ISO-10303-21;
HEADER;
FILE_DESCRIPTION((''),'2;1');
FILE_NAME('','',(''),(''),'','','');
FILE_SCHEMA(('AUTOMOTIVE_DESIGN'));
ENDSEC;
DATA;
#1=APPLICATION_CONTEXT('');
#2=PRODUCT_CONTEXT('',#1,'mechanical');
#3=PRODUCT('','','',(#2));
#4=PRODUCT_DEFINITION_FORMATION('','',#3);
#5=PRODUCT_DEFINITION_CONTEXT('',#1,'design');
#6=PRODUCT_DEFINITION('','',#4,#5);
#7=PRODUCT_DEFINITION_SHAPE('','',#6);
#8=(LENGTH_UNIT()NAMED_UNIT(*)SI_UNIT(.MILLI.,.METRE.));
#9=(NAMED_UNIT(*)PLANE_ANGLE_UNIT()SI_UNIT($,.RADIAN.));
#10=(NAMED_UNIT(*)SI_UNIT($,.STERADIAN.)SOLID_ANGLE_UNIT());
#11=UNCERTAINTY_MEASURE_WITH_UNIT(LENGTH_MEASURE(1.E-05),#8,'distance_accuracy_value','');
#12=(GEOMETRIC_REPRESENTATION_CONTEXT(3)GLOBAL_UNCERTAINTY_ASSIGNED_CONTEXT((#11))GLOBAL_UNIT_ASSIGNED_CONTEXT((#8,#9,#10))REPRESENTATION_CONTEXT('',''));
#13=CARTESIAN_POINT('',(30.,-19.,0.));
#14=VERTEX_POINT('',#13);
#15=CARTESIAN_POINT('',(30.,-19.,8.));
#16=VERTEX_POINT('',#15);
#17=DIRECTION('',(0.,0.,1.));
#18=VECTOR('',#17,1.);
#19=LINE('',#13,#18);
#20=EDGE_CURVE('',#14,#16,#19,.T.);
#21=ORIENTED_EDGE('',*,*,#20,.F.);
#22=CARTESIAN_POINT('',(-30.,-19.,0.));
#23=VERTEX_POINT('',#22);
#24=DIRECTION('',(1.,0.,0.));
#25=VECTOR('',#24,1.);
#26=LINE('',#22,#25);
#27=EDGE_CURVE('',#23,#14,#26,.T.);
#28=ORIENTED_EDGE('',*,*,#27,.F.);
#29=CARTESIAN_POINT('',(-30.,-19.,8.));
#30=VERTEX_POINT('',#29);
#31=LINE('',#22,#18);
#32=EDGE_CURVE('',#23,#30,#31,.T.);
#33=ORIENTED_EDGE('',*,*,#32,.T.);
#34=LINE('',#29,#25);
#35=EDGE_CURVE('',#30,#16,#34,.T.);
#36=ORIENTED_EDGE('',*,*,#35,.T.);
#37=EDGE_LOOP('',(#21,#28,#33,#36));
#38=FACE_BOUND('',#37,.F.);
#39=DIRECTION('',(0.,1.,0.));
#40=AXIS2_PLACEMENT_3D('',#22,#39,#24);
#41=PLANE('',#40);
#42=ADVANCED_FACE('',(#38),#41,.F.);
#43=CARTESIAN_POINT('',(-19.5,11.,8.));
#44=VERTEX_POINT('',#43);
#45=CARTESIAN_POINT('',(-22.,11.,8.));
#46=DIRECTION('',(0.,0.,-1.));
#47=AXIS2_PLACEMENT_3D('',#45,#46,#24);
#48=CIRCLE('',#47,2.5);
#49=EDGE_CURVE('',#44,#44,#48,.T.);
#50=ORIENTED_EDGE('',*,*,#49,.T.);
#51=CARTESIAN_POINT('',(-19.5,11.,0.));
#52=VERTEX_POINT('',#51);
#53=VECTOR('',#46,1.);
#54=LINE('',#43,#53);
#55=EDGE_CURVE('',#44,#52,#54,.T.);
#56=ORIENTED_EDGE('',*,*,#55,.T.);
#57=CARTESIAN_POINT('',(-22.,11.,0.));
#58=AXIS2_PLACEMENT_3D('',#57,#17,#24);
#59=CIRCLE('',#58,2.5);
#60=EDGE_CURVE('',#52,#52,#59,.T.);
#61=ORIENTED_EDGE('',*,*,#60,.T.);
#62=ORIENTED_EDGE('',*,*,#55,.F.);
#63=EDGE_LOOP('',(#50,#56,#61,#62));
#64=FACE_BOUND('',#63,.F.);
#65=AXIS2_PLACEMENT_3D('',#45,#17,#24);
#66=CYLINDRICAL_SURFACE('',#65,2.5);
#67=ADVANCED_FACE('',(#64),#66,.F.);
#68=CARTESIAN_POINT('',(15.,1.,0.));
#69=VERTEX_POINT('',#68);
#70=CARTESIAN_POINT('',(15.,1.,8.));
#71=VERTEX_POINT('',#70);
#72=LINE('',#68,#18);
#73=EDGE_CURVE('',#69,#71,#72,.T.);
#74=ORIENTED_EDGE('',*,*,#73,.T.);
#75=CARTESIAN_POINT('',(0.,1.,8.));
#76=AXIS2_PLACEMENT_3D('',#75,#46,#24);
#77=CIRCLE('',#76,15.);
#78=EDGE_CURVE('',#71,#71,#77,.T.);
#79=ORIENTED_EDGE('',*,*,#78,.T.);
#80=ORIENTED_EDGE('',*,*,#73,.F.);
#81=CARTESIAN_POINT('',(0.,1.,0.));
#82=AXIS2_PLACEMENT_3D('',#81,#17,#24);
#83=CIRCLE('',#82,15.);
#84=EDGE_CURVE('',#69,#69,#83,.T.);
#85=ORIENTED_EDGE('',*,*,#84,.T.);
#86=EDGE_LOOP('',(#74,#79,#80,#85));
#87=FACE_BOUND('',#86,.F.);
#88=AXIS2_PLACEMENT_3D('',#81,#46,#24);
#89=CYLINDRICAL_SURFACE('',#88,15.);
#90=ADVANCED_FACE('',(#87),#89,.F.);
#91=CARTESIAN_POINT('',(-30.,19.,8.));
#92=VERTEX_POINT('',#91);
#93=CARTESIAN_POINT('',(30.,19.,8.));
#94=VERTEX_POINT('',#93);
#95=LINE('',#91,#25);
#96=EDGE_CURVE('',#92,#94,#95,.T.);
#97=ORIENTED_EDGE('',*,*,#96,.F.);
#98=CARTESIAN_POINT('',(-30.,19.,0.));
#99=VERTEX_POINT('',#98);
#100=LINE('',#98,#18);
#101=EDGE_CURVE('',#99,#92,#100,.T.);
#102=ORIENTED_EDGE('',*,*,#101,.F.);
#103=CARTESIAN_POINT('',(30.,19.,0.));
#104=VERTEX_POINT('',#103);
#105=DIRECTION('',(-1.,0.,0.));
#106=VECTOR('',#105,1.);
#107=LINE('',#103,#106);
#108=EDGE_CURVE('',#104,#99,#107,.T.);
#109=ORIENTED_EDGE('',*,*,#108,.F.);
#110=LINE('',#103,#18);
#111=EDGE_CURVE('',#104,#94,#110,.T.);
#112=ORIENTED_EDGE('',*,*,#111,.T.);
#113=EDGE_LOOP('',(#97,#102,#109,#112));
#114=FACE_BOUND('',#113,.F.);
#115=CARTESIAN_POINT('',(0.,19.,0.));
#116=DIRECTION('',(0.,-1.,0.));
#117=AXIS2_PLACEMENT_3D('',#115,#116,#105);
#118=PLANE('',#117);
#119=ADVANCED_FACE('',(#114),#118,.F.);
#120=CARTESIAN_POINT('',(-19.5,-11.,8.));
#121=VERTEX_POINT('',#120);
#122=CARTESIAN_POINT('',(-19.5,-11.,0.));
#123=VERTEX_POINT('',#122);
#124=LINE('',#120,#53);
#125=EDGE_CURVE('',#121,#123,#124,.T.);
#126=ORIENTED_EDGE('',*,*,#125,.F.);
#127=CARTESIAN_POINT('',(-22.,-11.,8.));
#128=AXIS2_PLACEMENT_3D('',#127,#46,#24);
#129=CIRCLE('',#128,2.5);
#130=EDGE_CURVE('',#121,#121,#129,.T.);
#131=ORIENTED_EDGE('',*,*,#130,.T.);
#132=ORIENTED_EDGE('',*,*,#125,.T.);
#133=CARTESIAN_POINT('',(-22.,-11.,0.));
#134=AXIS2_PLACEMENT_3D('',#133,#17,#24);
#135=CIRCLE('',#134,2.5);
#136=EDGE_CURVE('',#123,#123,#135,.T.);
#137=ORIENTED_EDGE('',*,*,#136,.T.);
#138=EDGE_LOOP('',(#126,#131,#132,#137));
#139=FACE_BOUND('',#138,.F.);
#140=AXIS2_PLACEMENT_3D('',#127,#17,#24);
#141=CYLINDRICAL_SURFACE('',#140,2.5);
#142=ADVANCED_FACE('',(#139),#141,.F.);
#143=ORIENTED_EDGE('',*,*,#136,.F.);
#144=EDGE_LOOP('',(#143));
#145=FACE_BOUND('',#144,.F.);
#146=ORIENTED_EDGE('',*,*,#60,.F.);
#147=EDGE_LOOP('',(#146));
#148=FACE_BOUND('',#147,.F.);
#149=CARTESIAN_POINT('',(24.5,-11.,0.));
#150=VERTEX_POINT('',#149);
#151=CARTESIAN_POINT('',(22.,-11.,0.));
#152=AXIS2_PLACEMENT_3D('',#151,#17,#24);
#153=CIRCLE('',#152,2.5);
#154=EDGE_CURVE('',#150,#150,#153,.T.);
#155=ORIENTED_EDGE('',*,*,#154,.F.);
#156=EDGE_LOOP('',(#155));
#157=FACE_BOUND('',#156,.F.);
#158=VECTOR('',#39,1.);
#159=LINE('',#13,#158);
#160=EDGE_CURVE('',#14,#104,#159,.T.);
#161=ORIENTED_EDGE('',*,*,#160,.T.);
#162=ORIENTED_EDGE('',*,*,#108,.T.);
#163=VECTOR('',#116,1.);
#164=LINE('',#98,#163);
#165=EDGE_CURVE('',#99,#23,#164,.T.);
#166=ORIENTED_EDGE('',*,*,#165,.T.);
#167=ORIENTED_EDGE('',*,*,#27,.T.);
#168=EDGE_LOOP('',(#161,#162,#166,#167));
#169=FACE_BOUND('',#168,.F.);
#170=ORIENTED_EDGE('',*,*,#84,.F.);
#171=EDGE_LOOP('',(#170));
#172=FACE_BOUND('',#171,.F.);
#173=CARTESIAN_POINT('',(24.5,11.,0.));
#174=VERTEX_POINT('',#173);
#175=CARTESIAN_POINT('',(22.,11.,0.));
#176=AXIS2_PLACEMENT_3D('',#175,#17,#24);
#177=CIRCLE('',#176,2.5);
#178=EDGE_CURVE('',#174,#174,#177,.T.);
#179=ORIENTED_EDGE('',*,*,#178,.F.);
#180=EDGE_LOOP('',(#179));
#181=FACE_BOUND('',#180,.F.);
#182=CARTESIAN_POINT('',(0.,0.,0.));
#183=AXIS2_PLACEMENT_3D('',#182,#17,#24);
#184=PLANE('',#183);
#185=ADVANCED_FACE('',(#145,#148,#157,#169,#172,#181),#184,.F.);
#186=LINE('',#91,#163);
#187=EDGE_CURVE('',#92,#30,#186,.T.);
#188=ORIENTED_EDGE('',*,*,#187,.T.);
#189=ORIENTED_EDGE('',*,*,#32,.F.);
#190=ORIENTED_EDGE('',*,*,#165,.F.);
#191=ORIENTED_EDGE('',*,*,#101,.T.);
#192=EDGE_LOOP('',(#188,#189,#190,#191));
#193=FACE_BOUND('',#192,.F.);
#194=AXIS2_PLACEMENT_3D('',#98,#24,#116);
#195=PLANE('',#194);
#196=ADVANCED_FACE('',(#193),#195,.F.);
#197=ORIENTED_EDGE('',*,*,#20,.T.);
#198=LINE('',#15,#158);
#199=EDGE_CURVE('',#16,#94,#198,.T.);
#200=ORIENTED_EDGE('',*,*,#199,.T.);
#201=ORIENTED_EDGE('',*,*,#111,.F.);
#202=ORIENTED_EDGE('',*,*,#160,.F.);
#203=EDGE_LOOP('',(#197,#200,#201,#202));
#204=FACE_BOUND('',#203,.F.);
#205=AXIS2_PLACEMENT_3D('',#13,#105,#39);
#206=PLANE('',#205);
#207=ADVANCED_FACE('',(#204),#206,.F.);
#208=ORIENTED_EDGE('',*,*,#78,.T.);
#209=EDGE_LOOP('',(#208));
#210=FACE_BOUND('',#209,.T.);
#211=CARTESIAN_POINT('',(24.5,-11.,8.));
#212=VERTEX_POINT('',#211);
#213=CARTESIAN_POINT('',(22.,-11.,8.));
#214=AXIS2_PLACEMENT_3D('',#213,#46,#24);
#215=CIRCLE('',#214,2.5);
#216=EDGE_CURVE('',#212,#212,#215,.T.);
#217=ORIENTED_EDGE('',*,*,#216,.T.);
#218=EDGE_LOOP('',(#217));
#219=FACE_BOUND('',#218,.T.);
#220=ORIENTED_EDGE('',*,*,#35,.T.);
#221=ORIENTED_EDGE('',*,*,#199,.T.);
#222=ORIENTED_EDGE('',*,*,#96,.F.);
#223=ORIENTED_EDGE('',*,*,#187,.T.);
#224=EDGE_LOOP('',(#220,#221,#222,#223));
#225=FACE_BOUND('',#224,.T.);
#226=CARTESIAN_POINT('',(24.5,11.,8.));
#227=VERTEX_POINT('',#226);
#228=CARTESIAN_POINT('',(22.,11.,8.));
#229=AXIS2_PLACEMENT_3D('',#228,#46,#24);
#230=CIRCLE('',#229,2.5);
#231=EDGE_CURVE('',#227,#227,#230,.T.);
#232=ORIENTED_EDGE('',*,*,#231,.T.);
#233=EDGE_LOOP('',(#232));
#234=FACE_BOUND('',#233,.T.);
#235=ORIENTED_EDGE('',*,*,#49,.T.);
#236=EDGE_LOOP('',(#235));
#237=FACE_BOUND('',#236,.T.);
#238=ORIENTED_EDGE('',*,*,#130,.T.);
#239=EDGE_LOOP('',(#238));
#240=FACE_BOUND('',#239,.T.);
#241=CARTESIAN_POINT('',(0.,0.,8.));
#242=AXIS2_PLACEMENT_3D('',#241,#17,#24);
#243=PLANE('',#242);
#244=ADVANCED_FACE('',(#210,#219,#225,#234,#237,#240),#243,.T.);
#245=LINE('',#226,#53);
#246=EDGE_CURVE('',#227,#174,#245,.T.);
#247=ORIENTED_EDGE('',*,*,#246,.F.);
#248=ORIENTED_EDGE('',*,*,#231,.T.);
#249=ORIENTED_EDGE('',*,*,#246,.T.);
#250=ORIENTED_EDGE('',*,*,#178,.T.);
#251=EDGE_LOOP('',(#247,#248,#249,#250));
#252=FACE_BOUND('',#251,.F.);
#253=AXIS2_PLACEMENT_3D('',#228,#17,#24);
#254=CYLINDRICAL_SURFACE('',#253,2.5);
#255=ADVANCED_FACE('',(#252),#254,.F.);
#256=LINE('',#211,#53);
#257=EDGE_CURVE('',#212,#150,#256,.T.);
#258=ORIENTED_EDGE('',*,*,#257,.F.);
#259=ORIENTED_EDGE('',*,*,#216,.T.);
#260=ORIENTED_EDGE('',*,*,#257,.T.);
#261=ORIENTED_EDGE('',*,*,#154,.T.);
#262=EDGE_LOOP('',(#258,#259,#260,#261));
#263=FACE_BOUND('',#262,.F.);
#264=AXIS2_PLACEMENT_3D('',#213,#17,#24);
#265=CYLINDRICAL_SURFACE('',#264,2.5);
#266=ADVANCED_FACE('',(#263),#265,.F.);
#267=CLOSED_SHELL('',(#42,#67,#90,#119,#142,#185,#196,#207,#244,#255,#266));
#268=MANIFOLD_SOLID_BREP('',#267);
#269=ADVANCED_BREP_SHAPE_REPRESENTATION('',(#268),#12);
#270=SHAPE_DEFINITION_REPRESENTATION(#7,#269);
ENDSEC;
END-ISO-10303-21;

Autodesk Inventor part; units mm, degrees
ref_plane "YZ Plane" through (0, 0, 0) normal (1, 0, 0) x (0, 1, 0)
ref_plane "XZ Plane" through (0, 0, 0) normal (0, 1, 0) x (-1, 0, 0)
ref_plane "XY Plane" through (0, 0, 0) normal (0, 0, 1) x (1, 0, 0)
sketch "Szkic1" plane through (0, 0, 0) normal (0, 0, 1) x (1, 0, 0)
  line L0 (-30, -19) -> (30, -19)
  line L1 (30, -19) -> (30, 19)
  line L2 (30, 19) -> (-30, 19)
  line L3 (-30, 19) -> (-30, -19)
  line L4 (-30, -19) -> (30, 19) construction
  line L5 (30, -19) -> (-30, 19) construction
  line L6 (0, 19) -> (0, 1)
  circle A0 centre (0, 1) radius 15
  point P0 (0, 0)
  dimension "d0" = 60
  dimension "d1" = 38
  dimension "d2" = 18
  dimension "d3" = 30
extrude "Wyciągnięcie proste1" add sketch "Szkic1" along normal blind 8
sketch "Szkic2" plane through (0, 0, 8) normal (0, 0, 1) x (1, 0, 0)
  circle A0 centre (0, 1) radius 15 projected
  line L0 (-30, -19) -> (30, -19) projected
  line L1 (30, -19) -> (30, 19) projected
  line L2 (30, 19) -> (-30, 19) projected
  line L3 (-30, 19) -> (-30, -19) projected
  line L4 (-30, 19) -> (-30, -19) projected
  line L5 (-30, 19) -> (-22, 19)
  line L6 (30, 19) -> (-30, 19) projected
  line L7 (-22, 19) -> (-22, -19)
  line L8 (30, 19) -> (22, 19)
  line L9 (22, 19) -> (22, -19)
  line L10 (-22, 19) -> (-22, 11)
  line L11 (-22, -19) -> (-22, -11)
  line L12 (22, 19) -> (22, 11)
  line L13 (22, -19) -> (22, -11)
  circle A1 centre (-22, 11) radius 2.5
  circle A2 centre (-22, -11) radius 2.5
  circle A3 centre (22, 11) radius 2.5
  circle A4 centre (22, -11) radius 2.5
  point P0 (0, 0)
  dimension "d6" = 8
  dimension "d7" = 8
  dimension "d8" = 8
  dimension "d9" = 8
  dimension "d10" = 8
  dimension "d11" = 8
  dimension "d12" = 5
  dimension "d13" = 5
  dimension "d14" = 5
  dimension "d15" = 5
extrude "Wyciągnięcie proste2" cut sketch "Szkic2" against normal up to next contours A2 L7 | L7 A2 | A4 L9 | L9 A4 | A1 L7 | L7 A1 | A3 L9 | L9 A3
properties part number "Uchwyt silnika krokowego osi X - płaski (blacha łożyska)"
